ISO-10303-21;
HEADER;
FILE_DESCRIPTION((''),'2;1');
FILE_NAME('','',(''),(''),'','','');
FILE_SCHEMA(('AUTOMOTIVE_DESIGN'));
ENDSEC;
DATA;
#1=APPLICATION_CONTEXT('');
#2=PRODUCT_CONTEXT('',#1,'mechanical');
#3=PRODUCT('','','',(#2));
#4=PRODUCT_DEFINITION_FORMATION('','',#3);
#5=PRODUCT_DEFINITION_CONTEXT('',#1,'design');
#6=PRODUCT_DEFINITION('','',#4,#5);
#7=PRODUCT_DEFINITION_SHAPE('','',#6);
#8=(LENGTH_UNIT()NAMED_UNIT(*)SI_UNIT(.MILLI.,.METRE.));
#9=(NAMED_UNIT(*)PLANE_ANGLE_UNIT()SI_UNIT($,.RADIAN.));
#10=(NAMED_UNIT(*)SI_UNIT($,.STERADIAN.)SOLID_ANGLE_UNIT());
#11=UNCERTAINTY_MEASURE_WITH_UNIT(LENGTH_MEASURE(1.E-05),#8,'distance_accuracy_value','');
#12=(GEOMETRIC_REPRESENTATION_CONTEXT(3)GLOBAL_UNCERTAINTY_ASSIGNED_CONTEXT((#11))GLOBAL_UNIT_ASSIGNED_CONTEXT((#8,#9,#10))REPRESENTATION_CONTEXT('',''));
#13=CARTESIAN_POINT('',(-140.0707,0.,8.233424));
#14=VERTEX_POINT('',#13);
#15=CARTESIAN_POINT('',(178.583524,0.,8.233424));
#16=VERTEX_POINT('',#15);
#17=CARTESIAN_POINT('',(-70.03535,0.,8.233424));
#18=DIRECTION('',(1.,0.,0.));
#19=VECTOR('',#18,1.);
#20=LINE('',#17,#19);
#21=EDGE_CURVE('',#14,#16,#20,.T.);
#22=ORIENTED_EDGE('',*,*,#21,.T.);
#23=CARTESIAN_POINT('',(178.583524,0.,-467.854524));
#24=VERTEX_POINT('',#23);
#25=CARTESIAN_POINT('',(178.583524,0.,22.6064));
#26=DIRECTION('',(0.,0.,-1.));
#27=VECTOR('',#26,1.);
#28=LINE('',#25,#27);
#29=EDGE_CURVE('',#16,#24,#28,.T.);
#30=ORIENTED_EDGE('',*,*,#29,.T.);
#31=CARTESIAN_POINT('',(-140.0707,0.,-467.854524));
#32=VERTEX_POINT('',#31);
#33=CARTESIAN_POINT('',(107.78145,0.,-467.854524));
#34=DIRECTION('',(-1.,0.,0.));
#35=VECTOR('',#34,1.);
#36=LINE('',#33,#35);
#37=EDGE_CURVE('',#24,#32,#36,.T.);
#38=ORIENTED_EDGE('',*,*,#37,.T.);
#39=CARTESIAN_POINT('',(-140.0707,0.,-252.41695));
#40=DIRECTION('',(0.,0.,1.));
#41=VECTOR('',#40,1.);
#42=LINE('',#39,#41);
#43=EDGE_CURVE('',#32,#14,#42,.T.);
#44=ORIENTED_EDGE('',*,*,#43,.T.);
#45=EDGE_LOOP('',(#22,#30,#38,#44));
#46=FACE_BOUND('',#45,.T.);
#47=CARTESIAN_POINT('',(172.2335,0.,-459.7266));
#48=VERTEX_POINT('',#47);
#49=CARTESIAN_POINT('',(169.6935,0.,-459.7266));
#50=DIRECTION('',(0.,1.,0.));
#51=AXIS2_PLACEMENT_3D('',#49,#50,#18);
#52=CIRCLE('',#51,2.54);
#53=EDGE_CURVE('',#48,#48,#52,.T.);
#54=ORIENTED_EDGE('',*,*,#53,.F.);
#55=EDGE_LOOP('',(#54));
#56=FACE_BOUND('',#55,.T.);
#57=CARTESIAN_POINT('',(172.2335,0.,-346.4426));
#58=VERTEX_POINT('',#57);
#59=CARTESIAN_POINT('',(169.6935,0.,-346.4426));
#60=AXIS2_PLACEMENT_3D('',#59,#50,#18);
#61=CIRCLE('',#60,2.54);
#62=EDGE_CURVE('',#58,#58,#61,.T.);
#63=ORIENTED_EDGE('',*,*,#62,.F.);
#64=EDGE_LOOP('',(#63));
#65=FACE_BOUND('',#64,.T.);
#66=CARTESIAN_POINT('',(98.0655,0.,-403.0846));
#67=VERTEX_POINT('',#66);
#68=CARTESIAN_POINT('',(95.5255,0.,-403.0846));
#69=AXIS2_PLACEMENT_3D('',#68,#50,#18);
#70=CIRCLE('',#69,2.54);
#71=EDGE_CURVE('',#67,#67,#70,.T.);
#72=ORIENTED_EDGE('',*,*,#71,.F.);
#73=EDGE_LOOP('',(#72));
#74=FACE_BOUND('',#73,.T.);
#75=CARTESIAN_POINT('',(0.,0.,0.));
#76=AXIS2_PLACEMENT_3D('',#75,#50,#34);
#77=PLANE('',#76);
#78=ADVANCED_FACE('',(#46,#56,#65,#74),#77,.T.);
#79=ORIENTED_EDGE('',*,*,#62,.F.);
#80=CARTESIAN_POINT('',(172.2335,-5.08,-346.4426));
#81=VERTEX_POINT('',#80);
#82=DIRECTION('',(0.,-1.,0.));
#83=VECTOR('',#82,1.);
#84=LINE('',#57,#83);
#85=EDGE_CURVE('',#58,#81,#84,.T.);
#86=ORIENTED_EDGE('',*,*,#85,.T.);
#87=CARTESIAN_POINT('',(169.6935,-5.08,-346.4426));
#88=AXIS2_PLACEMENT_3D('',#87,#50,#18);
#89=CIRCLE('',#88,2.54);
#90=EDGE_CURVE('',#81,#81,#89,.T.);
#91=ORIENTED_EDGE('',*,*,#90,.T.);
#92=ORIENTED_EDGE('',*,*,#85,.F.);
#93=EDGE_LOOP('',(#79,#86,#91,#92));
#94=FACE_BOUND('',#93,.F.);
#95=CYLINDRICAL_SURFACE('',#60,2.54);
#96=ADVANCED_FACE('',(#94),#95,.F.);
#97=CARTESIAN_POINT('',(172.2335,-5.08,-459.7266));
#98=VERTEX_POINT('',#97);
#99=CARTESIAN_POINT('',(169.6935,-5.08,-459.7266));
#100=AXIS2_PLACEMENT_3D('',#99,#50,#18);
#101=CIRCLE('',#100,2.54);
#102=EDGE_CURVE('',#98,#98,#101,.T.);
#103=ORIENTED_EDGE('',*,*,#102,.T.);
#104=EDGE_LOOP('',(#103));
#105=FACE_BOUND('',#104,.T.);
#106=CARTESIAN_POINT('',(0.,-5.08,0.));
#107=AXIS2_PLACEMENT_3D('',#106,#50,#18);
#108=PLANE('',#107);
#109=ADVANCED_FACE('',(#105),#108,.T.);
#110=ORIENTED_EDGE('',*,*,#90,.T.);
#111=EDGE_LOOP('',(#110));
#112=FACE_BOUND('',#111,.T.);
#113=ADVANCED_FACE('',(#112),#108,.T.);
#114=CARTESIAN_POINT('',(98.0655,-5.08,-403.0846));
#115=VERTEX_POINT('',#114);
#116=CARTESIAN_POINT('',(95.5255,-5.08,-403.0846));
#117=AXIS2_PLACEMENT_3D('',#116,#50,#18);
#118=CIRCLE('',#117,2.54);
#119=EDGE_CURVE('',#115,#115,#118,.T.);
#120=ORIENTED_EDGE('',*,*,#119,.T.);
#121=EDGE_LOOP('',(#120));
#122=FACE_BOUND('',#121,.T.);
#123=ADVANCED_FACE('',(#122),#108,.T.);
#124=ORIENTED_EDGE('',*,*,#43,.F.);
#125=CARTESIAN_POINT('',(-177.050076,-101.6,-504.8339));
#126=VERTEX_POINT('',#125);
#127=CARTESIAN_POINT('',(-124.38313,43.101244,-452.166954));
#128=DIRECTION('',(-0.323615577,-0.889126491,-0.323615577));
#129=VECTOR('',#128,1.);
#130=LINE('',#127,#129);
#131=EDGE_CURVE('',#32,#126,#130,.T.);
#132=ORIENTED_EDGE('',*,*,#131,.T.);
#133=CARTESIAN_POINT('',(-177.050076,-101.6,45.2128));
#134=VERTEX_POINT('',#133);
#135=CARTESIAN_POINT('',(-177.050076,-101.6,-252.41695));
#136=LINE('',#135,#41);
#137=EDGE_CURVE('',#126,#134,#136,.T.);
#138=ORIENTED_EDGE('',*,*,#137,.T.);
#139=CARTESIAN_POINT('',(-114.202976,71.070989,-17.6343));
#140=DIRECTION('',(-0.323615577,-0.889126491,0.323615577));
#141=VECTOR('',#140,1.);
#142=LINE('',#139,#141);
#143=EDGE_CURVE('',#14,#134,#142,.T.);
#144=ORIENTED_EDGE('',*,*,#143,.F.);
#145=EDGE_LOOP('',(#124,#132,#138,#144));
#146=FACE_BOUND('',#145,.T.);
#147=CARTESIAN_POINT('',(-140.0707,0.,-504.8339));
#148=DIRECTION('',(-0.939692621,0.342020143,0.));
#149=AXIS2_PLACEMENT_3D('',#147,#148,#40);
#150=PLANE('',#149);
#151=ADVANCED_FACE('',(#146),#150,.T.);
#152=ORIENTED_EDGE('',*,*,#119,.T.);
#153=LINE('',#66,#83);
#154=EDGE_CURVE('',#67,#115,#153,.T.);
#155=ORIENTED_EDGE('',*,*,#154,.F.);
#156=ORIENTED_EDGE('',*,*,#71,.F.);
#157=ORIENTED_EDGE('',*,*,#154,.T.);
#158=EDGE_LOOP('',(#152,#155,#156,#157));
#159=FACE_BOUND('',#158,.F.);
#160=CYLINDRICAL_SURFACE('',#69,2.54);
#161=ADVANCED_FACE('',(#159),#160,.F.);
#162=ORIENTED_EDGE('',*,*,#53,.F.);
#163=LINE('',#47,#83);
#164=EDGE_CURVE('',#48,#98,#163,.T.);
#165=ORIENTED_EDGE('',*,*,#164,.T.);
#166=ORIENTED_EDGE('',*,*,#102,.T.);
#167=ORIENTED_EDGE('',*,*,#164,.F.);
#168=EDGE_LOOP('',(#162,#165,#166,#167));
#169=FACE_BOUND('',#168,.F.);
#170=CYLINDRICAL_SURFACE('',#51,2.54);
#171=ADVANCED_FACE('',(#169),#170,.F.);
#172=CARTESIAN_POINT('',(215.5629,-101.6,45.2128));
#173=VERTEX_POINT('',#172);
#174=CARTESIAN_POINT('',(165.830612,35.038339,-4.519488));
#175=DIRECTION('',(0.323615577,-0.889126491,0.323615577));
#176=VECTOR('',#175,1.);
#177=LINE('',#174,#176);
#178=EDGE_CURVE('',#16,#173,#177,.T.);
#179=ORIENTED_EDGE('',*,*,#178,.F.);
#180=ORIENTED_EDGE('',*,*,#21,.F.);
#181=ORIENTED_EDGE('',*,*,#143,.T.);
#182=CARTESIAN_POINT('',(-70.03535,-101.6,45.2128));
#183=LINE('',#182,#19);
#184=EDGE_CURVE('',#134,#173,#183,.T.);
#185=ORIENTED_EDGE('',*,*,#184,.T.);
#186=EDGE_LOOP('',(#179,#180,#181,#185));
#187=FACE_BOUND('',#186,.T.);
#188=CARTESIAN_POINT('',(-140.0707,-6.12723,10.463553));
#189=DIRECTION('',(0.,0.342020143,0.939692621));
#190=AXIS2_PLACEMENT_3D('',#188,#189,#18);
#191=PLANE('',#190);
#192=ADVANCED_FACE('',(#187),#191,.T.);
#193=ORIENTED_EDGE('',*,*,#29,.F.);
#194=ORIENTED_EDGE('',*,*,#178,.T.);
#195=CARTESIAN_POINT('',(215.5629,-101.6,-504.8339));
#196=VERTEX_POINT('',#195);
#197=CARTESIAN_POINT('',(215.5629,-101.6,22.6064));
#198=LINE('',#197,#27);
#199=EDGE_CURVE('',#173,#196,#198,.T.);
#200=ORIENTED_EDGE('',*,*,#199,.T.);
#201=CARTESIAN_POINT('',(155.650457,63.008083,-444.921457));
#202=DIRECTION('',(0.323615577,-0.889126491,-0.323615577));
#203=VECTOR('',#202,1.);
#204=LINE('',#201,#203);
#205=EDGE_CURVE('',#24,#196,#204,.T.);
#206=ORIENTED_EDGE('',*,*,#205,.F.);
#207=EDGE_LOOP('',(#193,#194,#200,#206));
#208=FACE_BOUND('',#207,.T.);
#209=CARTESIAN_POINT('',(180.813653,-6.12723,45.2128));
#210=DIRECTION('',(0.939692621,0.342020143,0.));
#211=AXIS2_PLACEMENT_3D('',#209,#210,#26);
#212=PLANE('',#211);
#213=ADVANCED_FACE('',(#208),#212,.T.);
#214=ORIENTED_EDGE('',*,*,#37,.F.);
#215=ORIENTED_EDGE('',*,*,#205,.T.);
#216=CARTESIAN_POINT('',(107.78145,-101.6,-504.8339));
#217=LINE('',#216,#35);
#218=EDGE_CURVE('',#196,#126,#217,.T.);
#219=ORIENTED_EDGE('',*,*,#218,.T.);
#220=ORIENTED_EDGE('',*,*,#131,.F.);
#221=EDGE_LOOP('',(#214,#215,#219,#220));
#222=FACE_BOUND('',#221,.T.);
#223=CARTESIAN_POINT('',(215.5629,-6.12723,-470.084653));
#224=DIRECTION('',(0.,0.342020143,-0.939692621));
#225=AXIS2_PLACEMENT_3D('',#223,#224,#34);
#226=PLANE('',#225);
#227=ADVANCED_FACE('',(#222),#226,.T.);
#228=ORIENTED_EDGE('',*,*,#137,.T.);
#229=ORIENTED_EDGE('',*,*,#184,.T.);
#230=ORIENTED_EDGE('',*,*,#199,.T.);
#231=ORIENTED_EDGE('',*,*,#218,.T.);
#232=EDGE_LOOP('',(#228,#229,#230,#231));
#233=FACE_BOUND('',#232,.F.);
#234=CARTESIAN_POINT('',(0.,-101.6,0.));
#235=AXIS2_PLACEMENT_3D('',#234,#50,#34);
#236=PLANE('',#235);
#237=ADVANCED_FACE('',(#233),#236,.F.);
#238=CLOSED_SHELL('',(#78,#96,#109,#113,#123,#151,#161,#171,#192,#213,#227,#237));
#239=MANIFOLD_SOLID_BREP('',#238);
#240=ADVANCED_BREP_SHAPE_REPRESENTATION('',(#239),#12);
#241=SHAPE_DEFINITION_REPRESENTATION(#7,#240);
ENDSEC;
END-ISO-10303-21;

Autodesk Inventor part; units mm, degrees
ref_plane "YZ Plane" through (0, 0, 0) normal (1, 0, 0) x (0, 1, 0)
ref_plane "XZ Plane" through (0, 0, 0) normal (0, 1, 0) x (-1, 0, 0)
ref_plane "XY Plane" through (0, 0, 0) normal (0, 0, 1) x (1, 0, 0)
sketch "Sketch1" plane through (0, 0, 0) normal (0, 1, 0) x (-1, 0, 0)
  line L0 (0, 0) -> (0, -129.54)
  line L1 (0, 0) -> (99.06, 0)
  line L2 (99.06, 0) -> (99.06, -129.54)
  line L3 (99.06, -129.54) -> (0, -129.54)
  line L4 (140.0707, 45.2128) -> (-215.5629, 45.2128)
  line L5 (-215.5629, 45.2128) -> (-215.5629, -504.8339)
  line L6 (-215.5629, -504.8339) -> (140.0707, -504.8339)
  line L7 (140.0707, -504.8339) -> (140.0707, 45.2128)
  dimension "d0" = 129.54
  dimension "d1" = 99.06
extrude "Extrusion1" add sketch "Sketch1" against normal blind 101.6 contours L1 L2 L3 L0 | L7 L6 L5 L4
draft "FaceDraft1" angle -20 pull direction (0, -1, 0) faces at (215.5629, -33.8667, -138.1361) (-21.5262, -33.8667, 45.2128) fixed edges at (215.5629, -101.6, -229.8106) (37.7461, -101.6, 45.2128)
draft "FaceDraft2" angle -20 pull direction (0, -1, 0) faces at (-140.0707, -67.7333, -150.4626) (84.6919, -67.7333, -504.8339) fixed edges at (-140.0707, 0, -248.3003) (37.7461, -101.6, -504.8339)
sketch "Sketch2" plane through (0, 0, 0) normal (0, 1, 0) x (1, 0, 0)
  line L0 (178.5835, 467.8546) -> (215.5629, 504.8339) projected
  line L1 (178.5835, 467.8546) -> (79.5235, 467.8546)
  line L2 (79.5235, 467.8546) -> (79.5235, 338.3146)
  line L3 (79.5235, 338.3146) -> (178.5835, 338.3146)
  line L4 (178.5835, 338.3146) -> (178.5835, 467.8546)
  line L5 (178.5835, 338.3146) -> (178.5835, 346.4426)
  line L6 (178.5835, -8.2334) -> (178.5835, 467.8546) projected
  line L7 (178.5835, 467.8546) -> (178.5835, 459.7266)
  circle A0 centre (95.5255, 403.0846) radius 2.54
  circle A1 centre (169.6935, 346.4426) radius 2.54
  circle A2 centre (169.6935, 459.7266) radius 2.54
  point P0 (0, 0)
  dimension "d6" = 99.06
  dimension "d7" = 129.54
  dimension "d13" = 5.08
  dimension "d14" = 5.08
  dimension "d15" = 5.08
extrude "Extrusion2" cut sketch "Sketch2" against normal blind 5.08 contours A0 | A1 | A2
equation "\"d16\" = d14"
properties part number "Base"
